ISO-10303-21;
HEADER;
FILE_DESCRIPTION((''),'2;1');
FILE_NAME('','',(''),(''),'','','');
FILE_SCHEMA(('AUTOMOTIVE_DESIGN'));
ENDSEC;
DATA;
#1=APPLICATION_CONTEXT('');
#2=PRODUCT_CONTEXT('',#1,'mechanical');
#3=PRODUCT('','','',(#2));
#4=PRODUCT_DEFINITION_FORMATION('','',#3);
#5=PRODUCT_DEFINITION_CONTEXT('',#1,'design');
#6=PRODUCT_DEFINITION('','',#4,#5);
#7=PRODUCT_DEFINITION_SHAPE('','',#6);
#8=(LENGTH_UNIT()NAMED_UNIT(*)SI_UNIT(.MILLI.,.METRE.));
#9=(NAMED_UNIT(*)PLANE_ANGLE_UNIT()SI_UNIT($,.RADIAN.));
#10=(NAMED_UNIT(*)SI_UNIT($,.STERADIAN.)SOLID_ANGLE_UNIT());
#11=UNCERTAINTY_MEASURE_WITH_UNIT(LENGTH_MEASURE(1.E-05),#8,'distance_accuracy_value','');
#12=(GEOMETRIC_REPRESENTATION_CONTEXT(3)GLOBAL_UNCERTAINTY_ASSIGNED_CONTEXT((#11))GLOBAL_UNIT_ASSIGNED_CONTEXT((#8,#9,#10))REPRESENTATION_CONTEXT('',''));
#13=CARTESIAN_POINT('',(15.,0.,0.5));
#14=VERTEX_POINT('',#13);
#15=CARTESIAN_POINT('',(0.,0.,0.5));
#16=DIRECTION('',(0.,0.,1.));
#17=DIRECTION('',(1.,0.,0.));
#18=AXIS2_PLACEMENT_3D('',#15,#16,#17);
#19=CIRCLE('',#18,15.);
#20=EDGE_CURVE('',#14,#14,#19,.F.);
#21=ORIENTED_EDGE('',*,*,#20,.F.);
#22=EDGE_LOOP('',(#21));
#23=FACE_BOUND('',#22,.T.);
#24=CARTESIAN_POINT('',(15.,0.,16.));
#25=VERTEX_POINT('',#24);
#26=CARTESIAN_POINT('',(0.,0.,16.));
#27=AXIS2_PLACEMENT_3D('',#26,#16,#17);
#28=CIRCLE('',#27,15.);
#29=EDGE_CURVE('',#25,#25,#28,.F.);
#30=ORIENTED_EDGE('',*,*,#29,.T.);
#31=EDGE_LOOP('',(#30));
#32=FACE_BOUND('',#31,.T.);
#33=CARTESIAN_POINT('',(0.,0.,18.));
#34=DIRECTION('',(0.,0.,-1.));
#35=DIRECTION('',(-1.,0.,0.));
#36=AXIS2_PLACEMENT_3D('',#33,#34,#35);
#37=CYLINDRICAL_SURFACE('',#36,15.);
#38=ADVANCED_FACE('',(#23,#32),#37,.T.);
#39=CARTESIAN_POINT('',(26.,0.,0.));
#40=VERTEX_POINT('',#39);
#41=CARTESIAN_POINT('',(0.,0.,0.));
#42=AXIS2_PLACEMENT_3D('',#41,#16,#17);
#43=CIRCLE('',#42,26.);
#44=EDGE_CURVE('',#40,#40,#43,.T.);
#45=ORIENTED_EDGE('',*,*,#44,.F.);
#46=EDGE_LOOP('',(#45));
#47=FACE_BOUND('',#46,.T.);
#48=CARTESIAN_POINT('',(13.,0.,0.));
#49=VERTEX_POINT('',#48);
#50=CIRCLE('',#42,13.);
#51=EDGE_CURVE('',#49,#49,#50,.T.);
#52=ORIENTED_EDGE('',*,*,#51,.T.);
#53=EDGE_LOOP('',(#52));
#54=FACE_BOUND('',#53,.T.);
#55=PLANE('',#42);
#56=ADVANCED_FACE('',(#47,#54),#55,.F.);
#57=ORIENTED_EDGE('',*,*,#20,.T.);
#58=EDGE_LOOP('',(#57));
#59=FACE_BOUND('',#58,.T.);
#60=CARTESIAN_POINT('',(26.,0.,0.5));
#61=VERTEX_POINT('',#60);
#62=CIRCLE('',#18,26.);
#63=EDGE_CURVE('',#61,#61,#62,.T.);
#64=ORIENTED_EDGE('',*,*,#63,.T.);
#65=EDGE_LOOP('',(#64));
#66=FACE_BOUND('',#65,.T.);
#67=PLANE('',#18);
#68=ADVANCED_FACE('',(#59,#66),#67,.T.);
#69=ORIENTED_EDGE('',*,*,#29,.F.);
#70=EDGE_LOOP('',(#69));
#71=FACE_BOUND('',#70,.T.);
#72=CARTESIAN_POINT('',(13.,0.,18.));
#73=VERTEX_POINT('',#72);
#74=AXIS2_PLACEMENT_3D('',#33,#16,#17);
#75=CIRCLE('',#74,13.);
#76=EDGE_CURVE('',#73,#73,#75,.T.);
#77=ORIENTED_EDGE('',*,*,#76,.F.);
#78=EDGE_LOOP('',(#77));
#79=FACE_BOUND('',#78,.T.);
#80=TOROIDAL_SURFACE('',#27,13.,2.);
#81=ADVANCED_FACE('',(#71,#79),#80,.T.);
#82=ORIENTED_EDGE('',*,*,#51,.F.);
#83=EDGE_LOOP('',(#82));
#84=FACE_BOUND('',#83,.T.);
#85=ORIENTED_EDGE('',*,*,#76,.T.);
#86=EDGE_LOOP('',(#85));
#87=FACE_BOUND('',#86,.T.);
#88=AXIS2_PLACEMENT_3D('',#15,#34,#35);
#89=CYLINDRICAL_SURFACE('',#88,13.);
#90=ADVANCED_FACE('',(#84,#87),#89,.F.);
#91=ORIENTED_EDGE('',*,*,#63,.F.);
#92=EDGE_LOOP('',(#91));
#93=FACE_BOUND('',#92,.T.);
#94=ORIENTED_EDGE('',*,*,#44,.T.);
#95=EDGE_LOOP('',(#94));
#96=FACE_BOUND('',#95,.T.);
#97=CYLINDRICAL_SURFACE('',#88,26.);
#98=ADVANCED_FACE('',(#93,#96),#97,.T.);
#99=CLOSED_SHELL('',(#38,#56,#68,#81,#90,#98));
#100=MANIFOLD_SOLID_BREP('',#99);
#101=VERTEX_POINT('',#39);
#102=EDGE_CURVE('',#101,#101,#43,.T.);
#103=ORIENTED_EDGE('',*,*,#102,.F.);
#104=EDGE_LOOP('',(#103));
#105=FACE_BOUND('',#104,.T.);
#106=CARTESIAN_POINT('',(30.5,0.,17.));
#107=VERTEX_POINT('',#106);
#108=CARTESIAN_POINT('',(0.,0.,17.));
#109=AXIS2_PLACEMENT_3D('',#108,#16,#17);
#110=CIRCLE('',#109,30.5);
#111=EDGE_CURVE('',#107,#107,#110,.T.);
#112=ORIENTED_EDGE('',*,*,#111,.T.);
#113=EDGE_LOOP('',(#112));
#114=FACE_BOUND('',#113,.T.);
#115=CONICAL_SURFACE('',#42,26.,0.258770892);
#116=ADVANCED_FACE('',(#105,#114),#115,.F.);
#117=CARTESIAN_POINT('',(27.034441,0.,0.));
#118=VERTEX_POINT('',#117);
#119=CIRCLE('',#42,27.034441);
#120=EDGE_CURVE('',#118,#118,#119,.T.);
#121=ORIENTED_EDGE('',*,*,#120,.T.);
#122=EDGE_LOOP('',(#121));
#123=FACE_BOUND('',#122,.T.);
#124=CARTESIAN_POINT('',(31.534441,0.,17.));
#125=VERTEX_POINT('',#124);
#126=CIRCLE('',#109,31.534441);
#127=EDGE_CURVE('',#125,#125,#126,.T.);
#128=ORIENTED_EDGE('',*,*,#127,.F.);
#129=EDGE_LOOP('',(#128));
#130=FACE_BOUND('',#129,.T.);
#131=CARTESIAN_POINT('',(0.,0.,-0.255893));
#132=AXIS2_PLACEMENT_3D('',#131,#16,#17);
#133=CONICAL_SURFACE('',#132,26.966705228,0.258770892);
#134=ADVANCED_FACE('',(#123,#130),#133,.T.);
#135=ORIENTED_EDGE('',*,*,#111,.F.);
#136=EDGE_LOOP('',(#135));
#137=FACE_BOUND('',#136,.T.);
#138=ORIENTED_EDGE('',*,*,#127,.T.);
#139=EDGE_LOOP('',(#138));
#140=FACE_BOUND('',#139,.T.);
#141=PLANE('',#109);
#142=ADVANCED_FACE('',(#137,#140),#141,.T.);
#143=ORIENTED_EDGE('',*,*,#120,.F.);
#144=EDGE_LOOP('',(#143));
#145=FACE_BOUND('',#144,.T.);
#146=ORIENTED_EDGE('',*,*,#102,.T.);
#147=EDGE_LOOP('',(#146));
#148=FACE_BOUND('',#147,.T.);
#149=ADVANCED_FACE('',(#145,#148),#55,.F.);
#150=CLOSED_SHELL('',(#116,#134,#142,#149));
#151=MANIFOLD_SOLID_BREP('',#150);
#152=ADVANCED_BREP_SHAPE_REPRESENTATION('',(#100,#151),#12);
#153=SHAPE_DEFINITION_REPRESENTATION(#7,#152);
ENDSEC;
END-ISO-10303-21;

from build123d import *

# Parameters (mm, degrees)
SKETCH_1_R        = 26
SKETCH_1_R_2      = 13
EXTRUDE_1_DEPTH   = 0.5
SKETCH_7_R        = 15
SKETCH_7_R_2      = 13
EXTRUDE_1_2_DEPTH = 18
FILLET_4_R        = 2


# Read off the part's stored shape, not the designer's step: По сечениям-Тонкостенный1
with BuildPart() as part:
    # Эскиз1 → Extrude 1 (new body)
    with BuildSketch(Plane.XY):
        Circle(SKETCH_1_R)
        Circle(SKETCH_1_R_2, mode=Mode.SUBTRACT)
    extrude(amount=EXTRUDE_1_DEPTH)

    # Эскиз7 → Extrude 1 2 (add)
    with BuildSketch(Plane.XY):
        Circle(SKETCH_7_R)
        Circle(SKETCH_7_R_2, mode=Mode.SUBTRACT)
    extrude(amount=EXTRUDE_1_2_DEPTH)

    # Скругление4
    fillet_4_edges = [part.edges().sort_by_distance(p)[0] for p in [
        (-15, 0, 18),
    ]]
    fillet(fillet_4_edges, radius=FILLET_4_R - 0.0001)  # a hair under: the kernel refuses the full size


with BuildPart() as body_2:
    # По сечениям-Тонкостенный1 outline → По сечениям-Тонкостенный1 (revolve)
    with BuildSketch(Plane.XZ):
        Polygon((30.5, 17), (26, 0), (27.034441494, 0), (31.534441494, 17), align=None)
    revolve(axis=Axis((0, 0, 0), (0, 0, 1)))


solid = Compound([part.part, body_2.part])
